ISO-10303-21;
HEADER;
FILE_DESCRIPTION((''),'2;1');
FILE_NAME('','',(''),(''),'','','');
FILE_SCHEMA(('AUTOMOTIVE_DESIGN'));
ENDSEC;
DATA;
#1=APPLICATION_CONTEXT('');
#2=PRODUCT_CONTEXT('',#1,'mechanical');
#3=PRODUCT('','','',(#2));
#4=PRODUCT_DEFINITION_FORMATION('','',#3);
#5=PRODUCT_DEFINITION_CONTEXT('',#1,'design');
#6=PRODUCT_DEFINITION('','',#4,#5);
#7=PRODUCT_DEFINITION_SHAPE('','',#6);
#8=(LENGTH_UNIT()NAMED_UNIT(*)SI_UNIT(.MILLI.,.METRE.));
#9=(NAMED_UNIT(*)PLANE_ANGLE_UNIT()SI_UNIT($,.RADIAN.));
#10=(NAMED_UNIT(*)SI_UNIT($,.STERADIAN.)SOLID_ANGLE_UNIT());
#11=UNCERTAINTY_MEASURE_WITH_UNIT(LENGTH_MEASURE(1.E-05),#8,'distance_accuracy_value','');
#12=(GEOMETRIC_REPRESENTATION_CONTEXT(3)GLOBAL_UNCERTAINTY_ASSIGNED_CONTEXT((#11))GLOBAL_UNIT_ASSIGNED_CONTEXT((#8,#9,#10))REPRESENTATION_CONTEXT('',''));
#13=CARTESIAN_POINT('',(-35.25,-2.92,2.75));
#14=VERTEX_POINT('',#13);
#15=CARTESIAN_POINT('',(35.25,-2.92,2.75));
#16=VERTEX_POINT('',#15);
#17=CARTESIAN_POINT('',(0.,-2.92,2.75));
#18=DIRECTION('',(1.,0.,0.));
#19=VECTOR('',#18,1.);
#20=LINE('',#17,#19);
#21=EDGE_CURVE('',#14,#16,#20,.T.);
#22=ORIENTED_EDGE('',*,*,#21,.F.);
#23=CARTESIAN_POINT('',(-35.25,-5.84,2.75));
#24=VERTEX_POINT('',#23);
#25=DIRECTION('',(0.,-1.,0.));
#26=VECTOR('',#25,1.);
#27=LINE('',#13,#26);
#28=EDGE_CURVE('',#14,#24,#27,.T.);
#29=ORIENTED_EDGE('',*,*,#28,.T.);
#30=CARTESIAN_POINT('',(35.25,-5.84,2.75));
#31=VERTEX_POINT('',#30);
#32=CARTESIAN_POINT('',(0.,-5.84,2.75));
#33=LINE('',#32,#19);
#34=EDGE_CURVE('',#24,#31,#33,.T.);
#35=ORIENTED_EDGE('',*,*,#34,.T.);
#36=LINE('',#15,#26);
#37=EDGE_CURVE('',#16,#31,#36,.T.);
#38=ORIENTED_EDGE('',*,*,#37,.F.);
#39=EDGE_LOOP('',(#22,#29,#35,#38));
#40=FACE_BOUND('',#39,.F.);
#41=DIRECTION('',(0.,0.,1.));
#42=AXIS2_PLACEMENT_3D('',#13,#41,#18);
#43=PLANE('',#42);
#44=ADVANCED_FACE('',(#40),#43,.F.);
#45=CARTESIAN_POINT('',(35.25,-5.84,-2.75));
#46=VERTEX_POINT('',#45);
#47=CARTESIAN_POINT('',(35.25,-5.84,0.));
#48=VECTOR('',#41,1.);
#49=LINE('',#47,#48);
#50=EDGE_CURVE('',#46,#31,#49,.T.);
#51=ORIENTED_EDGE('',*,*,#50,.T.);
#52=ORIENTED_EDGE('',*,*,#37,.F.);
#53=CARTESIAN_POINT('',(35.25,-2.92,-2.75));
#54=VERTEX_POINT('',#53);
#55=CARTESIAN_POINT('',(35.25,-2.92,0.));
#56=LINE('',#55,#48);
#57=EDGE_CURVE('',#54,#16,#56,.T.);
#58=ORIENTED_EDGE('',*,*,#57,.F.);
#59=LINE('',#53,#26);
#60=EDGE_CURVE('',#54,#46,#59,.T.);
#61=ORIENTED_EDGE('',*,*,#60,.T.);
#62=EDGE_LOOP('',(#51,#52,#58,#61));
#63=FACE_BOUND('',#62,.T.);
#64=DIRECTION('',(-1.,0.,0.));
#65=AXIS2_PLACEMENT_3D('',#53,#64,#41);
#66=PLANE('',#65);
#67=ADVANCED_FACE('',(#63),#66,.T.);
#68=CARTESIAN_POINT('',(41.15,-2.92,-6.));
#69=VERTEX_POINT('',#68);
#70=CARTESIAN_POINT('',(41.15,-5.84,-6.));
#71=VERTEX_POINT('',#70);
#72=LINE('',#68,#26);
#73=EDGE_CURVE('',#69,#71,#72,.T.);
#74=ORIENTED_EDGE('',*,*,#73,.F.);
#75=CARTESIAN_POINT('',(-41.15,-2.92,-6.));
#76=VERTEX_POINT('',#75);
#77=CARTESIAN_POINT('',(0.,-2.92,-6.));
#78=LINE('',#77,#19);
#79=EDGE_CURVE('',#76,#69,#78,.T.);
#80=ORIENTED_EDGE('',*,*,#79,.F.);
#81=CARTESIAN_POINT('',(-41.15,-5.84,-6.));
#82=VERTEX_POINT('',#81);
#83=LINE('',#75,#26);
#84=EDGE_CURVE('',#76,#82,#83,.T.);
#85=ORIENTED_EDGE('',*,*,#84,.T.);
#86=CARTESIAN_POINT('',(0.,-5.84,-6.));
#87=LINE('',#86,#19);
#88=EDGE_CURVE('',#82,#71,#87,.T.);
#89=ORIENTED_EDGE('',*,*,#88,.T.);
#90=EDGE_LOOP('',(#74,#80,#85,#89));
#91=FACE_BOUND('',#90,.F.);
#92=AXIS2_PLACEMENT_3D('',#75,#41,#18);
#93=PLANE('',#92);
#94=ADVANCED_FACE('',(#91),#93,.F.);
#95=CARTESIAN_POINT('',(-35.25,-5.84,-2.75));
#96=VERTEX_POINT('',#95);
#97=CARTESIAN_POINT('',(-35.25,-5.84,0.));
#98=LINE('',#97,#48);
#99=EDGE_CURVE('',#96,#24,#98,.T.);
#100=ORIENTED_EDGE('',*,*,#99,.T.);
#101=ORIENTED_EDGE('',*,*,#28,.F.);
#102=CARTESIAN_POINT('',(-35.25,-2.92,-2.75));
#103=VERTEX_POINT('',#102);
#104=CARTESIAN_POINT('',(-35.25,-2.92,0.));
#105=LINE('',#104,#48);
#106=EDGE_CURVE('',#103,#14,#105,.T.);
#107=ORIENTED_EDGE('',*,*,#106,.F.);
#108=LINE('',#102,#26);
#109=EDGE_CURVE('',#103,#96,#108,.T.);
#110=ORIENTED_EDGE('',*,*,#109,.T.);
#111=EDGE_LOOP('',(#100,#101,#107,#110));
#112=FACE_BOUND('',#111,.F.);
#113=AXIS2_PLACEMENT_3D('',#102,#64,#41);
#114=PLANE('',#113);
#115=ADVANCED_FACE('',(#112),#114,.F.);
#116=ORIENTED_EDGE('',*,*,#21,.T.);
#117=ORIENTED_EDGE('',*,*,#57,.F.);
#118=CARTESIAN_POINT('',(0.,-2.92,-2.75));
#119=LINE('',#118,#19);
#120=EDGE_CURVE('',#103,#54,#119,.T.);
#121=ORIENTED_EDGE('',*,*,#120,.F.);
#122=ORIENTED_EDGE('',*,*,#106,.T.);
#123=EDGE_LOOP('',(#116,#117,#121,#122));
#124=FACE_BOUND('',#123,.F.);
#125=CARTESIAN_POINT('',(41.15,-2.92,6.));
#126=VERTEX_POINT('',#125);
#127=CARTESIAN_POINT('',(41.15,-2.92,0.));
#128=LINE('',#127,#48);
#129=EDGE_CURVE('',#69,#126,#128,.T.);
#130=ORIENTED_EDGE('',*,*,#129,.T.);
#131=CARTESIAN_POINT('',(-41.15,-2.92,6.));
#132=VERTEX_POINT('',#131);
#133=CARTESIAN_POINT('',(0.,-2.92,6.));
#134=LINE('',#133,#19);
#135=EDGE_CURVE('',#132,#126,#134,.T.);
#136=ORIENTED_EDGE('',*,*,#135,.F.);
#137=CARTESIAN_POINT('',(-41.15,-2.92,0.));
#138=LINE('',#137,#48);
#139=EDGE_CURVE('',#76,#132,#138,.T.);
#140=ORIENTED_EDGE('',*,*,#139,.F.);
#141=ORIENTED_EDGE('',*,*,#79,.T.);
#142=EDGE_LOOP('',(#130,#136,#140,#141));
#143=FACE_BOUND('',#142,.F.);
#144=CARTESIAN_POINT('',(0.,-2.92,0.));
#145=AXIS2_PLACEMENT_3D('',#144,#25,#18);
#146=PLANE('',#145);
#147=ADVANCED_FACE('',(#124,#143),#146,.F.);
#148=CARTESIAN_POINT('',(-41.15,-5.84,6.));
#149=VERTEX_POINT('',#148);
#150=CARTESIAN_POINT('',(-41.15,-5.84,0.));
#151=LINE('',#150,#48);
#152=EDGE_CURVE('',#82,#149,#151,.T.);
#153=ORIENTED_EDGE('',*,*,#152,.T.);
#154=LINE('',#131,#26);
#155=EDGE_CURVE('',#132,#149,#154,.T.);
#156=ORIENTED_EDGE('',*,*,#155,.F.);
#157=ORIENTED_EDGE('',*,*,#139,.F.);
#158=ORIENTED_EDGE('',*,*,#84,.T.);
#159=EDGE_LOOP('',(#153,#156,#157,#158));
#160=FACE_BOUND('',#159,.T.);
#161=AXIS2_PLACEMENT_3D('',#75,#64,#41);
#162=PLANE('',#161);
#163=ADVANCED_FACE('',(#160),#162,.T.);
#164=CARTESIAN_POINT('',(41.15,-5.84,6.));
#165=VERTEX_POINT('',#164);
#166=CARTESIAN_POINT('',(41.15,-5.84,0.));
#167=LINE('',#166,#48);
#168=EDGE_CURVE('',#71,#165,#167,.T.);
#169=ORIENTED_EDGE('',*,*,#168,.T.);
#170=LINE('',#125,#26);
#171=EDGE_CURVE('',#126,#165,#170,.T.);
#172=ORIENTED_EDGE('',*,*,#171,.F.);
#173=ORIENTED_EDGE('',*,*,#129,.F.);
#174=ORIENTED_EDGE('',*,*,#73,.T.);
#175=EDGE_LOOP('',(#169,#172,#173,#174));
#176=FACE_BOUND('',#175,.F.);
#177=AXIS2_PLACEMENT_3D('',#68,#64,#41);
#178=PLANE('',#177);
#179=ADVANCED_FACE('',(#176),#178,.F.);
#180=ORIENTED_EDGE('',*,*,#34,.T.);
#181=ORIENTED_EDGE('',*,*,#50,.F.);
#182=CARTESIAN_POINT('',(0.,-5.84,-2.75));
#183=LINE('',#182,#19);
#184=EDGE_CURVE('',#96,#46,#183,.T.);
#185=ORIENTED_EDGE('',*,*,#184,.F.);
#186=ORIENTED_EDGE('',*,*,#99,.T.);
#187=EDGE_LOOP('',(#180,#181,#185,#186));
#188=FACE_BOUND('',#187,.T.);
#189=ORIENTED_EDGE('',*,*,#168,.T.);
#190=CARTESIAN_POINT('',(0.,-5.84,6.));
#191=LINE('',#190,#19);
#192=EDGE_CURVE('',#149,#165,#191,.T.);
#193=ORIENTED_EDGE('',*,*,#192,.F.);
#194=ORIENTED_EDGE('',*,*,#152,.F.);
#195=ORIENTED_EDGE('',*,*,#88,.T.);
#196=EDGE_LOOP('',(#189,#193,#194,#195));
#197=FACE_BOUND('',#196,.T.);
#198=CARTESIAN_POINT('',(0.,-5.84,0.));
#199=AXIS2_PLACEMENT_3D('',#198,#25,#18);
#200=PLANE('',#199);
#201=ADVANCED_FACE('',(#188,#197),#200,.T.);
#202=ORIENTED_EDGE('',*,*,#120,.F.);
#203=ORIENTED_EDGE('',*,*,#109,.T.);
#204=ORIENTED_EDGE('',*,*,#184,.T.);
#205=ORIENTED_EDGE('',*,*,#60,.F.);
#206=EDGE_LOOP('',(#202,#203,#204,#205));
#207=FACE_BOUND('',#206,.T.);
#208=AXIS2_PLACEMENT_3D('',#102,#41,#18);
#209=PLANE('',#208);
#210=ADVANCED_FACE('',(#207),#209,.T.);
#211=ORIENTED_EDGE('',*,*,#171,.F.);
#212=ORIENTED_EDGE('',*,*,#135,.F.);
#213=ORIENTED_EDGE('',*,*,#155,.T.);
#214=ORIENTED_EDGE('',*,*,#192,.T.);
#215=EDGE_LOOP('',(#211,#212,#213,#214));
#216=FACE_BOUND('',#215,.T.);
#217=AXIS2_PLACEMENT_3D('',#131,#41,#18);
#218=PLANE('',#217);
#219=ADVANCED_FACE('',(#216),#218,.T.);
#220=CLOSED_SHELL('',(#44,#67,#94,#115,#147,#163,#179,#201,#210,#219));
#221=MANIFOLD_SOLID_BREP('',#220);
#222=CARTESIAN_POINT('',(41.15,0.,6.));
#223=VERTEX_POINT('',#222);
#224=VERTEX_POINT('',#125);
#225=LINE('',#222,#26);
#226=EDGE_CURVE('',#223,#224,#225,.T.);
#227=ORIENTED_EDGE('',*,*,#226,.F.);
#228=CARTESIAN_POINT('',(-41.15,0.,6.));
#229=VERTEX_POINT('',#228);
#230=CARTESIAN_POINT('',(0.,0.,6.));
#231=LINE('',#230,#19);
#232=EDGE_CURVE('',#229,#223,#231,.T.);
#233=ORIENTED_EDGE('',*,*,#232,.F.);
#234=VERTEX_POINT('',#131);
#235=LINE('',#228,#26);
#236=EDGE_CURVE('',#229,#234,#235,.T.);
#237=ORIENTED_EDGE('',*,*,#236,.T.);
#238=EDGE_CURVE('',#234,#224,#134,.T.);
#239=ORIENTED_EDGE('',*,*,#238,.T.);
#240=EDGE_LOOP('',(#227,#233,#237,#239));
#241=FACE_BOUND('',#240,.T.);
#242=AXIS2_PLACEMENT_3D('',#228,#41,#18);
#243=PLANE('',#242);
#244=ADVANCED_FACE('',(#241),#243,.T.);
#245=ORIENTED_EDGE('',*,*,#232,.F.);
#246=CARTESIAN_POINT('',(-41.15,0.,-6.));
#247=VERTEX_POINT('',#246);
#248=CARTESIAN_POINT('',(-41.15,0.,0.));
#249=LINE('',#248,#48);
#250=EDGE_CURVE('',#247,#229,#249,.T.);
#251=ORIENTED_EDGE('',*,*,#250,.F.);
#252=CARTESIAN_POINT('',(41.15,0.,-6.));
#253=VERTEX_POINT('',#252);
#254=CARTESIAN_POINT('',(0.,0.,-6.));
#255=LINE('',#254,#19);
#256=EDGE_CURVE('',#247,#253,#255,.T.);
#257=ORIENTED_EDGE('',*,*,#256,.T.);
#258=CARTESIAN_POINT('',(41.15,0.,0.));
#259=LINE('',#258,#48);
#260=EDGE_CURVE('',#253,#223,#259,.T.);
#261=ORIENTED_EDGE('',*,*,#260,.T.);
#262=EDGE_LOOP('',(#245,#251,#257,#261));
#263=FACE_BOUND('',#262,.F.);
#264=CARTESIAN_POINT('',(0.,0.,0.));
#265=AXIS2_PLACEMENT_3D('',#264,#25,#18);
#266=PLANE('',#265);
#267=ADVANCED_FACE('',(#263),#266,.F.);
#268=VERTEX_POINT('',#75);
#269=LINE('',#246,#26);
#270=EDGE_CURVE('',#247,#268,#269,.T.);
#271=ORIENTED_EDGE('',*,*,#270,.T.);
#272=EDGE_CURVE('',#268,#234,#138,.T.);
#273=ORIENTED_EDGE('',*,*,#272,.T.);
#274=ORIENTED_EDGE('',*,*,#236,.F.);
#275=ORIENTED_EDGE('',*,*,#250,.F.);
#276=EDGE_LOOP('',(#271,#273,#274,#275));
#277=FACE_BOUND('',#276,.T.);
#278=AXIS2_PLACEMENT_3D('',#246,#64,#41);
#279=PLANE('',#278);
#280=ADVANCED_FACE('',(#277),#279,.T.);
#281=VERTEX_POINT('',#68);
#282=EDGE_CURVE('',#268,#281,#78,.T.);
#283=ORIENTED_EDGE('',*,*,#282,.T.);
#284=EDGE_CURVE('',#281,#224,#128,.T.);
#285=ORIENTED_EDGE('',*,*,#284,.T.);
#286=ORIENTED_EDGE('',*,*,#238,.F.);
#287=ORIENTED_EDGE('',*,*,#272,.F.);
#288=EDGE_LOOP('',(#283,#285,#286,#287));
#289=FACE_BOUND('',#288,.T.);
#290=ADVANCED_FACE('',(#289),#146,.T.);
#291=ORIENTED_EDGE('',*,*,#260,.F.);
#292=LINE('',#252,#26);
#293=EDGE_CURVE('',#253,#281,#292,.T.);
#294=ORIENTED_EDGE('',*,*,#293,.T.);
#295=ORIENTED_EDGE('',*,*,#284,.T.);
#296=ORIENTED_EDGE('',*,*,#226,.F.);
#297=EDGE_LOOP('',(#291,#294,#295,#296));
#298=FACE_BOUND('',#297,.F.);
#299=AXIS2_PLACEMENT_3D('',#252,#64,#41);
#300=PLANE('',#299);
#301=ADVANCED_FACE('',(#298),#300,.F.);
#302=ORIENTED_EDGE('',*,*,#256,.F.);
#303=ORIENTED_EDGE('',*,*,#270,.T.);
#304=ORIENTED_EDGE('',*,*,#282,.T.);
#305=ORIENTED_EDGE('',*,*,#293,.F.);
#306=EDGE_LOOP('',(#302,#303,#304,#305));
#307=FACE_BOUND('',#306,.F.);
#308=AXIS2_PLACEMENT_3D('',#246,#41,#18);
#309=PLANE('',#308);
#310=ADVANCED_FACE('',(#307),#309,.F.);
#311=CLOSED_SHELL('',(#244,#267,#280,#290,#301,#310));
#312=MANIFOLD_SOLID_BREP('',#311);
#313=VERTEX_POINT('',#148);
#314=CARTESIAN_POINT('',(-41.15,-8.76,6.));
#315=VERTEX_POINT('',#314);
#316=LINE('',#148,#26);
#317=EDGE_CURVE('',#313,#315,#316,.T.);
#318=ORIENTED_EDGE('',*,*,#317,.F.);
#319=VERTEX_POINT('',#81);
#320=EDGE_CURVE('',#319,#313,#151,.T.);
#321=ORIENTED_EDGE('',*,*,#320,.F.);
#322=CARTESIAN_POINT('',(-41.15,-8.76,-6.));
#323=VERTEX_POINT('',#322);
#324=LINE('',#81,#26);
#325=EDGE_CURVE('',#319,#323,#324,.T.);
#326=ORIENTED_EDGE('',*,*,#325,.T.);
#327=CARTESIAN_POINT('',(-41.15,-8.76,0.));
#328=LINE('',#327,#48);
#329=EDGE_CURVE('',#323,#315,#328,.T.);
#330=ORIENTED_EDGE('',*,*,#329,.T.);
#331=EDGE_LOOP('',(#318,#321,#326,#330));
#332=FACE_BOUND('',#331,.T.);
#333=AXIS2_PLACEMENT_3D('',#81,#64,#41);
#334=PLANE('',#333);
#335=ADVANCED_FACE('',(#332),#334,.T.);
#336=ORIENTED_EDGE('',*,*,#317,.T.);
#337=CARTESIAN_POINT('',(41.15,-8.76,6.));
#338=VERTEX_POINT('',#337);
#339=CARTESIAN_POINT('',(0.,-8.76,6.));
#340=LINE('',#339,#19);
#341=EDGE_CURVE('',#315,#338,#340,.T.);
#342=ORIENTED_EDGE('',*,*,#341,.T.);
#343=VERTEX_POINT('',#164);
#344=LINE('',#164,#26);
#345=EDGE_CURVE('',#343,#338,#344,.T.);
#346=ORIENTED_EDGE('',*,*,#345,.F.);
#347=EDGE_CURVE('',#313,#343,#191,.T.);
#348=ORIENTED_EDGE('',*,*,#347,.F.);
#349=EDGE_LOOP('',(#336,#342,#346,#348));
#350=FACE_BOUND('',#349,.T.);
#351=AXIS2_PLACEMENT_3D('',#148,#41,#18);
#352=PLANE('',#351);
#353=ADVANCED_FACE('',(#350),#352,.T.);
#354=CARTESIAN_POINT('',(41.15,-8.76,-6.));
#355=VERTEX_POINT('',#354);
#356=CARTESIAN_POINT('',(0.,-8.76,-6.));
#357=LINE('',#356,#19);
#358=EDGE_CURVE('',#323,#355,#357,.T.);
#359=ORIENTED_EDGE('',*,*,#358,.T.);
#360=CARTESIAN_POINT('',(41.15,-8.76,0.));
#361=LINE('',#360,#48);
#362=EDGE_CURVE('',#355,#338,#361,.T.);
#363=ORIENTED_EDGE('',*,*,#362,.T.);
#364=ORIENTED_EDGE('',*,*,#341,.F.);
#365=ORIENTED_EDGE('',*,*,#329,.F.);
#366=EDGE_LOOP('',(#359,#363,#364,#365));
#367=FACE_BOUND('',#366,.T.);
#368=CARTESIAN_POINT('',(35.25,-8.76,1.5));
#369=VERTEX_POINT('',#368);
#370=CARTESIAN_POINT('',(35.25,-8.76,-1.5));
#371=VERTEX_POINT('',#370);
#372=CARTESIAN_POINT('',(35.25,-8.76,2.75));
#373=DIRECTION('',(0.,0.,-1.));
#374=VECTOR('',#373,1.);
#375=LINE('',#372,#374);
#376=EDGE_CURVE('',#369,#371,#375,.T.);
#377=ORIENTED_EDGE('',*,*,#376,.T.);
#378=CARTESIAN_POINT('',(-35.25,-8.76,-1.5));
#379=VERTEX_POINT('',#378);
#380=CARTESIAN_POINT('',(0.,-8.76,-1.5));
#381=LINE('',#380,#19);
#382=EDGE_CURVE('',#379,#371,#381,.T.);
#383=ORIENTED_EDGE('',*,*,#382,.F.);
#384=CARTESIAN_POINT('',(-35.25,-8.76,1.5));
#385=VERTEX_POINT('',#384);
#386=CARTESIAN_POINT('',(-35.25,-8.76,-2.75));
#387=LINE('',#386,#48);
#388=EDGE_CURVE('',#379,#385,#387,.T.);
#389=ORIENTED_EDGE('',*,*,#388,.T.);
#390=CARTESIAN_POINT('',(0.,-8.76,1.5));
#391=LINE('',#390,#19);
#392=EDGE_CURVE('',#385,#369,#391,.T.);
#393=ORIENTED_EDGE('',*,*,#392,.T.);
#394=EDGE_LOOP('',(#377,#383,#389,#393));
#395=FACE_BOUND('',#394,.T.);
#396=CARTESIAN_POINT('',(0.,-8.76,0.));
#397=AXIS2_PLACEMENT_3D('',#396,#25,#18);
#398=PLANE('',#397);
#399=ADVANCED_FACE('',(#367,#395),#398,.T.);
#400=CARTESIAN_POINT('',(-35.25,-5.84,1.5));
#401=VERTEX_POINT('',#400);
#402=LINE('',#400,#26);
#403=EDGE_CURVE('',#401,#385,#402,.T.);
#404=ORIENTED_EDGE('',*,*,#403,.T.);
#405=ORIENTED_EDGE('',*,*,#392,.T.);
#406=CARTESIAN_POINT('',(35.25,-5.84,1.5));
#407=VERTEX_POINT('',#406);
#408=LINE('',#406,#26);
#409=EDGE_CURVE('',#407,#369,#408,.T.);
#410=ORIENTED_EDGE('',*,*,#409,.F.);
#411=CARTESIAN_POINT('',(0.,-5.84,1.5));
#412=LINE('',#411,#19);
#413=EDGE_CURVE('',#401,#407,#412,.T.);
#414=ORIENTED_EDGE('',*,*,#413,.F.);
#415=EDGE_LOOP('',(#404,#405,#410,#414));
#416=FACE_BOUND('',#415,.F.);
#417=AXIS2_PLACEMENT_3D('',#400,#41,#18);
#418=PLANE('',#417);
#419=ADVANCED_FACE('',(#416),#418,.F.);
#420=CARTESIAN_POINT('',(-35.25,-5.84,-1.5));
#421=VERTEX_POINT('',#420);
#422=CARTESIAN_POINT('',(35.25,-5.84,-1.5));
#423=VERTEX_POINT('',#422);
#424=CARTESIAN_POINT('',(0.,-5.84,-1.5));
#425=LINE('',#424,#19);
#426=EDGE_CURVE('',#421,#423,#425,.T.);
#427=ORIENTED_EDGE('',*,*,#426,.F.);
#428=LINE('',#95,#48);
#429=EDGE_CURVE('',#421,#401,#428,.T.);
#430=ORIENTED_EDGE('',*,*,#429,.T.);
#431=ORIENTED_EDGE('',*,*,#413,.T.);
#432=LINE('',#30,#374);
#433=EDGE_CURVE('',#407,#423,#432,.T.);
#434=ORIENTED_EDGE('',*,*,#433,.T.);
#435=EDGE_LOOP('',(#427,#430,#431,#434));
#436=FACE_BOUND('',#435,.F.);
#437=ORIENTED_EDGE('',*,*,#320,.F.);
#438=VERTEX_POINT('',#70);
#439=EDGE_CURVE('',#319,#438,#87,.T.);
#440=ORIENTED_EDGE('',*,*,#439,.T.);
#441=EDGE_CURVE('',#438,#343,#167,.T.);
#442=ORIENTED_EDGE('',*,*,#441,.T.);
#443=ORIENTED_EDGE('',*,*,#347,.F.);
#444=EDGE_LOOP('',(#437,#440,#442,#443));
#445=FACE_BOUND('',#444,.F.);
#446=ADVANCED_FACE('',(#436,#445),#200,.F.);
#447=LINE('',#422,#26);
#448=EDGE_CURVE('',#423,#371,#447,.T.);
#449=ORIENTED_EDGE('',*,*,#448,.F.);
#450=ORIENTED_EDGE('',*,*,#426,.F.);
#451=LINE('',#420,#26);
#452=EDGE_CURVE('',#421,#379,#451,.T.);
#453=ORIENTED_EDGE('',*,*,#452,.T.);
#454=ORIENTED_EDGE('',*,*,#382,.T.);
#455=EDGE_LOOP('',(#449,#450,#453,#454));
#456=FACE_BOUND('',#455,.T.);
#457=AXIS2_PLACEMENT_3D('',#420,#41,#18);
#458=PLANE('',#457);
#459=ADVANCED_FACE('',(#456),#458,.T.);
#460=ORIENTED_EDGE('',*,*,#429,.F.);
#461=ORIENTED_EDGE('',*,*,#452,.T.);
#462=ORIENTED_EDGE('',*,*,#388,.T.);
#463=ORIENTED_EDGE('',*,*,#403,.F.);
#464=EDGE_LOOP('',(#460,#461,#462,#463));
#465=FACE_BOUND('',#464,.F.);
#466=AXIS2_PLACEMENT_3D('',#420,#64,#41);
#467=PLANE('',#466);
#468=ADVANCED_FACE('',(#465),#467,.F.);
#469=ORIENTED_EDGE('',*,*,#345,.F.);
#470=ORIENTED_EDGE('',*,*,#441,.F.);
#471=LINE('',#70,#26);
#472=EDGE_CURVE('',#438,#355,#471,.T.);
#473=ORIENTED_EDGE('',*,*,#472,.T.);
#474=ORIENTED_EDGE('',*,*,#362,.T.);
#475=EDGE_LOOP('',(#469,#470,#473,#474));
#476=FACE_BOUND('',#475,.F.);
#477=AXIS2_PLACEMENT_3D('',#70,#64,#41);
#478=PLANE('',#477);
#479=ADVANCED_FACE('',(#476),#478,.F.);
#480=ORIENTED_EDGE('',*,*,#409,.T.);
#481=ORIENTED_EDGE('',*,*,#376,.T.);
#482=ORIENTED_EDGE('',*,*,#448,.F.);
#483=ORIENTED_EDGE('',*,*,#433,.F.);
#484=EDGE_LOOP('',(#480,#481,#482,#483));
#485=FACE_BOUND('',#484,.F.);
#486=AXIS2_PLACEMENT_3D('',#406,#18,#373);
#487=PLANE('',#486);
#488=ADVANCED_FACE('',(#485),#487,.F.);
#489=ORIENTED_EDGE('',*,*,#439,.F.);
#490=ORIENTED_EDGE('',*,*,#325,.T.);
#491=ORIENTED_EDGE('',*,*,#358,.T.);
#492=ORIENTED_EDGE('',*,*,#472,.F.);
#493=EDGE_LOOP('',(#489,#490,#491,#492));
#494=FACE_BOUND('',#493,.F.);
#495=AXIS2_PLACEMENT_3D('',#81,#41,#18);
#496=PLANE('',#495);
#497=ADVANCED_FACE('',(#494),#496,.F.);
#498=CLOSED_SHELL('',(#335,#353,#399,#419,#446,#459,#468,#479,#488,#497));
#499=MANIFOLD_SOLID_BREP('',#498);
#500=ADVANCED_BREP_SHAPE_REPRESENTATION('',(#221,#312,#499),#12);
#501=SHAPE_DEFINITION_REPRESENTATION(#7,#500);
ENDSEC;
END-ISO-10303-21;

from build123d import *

# Parameters (mm, degrees)
F0_W     = 82.3
F0_H     = 12
F1_DEPTH = 2.92
F2_W     = 82.3
F2_H     = 12
F2_W_2   = 70.5
F2_H_2   = 5.5
F3_DEPTH = 2.92
F4_W     = 82.3
F4_H     = 12
F4_W_2   = 70.5
F4_H_2   = 1.25
F5_DEPTH = 2.92


# Not quite as in the source:
# - a feature names something its author has since deleted; it is built from what else it names


with BuildPart() as f1:
    # F0 (on Front) → F1 (new body)
    with BuildSketch(Plane.XZ):
        Rectangle(F0_W, F0_H)
    extrude(amount=F1_DEPTH)


with BuildPart() as f3:
    # F2 (on face) → F3 (new body)
    with BuildSketch(Plane.XZ.offset(2.92)):
        Rectangle(F2_W, F2_H)
        Rectangle(F2_W_2, F2_H_2, mode=Mode.SUBTRACT)
    extrude(amount=F3_DEPTH)


with BuildPart() as f5:
    # F4 (on face) → F5 (new body)
    with BuildSketch(Plane.XZ.offset(5.84)):
        Rectangle(F4_W, F4_H)
        Polygon((35.25, 1.5), (35.25, -1.5), (35.25, -2.75), (-35.25, -2.75), (-35.25, -1.5), (-35.25, 1.5), (-35.25, 2.75), (35.25, 2.75), align=None, mode=Mode.SUBTRACT)
        with Locations((0, 2.125)):
            Rectangle(F4_W_2, F4_H_2)
        with Locations((0, -2.125)):
            Rectangle(F4_W_2, F4_H_2)
    extrude(amount=F5_DEPTH)


solid = Compound([f1.part, f3.part, f5.part])
